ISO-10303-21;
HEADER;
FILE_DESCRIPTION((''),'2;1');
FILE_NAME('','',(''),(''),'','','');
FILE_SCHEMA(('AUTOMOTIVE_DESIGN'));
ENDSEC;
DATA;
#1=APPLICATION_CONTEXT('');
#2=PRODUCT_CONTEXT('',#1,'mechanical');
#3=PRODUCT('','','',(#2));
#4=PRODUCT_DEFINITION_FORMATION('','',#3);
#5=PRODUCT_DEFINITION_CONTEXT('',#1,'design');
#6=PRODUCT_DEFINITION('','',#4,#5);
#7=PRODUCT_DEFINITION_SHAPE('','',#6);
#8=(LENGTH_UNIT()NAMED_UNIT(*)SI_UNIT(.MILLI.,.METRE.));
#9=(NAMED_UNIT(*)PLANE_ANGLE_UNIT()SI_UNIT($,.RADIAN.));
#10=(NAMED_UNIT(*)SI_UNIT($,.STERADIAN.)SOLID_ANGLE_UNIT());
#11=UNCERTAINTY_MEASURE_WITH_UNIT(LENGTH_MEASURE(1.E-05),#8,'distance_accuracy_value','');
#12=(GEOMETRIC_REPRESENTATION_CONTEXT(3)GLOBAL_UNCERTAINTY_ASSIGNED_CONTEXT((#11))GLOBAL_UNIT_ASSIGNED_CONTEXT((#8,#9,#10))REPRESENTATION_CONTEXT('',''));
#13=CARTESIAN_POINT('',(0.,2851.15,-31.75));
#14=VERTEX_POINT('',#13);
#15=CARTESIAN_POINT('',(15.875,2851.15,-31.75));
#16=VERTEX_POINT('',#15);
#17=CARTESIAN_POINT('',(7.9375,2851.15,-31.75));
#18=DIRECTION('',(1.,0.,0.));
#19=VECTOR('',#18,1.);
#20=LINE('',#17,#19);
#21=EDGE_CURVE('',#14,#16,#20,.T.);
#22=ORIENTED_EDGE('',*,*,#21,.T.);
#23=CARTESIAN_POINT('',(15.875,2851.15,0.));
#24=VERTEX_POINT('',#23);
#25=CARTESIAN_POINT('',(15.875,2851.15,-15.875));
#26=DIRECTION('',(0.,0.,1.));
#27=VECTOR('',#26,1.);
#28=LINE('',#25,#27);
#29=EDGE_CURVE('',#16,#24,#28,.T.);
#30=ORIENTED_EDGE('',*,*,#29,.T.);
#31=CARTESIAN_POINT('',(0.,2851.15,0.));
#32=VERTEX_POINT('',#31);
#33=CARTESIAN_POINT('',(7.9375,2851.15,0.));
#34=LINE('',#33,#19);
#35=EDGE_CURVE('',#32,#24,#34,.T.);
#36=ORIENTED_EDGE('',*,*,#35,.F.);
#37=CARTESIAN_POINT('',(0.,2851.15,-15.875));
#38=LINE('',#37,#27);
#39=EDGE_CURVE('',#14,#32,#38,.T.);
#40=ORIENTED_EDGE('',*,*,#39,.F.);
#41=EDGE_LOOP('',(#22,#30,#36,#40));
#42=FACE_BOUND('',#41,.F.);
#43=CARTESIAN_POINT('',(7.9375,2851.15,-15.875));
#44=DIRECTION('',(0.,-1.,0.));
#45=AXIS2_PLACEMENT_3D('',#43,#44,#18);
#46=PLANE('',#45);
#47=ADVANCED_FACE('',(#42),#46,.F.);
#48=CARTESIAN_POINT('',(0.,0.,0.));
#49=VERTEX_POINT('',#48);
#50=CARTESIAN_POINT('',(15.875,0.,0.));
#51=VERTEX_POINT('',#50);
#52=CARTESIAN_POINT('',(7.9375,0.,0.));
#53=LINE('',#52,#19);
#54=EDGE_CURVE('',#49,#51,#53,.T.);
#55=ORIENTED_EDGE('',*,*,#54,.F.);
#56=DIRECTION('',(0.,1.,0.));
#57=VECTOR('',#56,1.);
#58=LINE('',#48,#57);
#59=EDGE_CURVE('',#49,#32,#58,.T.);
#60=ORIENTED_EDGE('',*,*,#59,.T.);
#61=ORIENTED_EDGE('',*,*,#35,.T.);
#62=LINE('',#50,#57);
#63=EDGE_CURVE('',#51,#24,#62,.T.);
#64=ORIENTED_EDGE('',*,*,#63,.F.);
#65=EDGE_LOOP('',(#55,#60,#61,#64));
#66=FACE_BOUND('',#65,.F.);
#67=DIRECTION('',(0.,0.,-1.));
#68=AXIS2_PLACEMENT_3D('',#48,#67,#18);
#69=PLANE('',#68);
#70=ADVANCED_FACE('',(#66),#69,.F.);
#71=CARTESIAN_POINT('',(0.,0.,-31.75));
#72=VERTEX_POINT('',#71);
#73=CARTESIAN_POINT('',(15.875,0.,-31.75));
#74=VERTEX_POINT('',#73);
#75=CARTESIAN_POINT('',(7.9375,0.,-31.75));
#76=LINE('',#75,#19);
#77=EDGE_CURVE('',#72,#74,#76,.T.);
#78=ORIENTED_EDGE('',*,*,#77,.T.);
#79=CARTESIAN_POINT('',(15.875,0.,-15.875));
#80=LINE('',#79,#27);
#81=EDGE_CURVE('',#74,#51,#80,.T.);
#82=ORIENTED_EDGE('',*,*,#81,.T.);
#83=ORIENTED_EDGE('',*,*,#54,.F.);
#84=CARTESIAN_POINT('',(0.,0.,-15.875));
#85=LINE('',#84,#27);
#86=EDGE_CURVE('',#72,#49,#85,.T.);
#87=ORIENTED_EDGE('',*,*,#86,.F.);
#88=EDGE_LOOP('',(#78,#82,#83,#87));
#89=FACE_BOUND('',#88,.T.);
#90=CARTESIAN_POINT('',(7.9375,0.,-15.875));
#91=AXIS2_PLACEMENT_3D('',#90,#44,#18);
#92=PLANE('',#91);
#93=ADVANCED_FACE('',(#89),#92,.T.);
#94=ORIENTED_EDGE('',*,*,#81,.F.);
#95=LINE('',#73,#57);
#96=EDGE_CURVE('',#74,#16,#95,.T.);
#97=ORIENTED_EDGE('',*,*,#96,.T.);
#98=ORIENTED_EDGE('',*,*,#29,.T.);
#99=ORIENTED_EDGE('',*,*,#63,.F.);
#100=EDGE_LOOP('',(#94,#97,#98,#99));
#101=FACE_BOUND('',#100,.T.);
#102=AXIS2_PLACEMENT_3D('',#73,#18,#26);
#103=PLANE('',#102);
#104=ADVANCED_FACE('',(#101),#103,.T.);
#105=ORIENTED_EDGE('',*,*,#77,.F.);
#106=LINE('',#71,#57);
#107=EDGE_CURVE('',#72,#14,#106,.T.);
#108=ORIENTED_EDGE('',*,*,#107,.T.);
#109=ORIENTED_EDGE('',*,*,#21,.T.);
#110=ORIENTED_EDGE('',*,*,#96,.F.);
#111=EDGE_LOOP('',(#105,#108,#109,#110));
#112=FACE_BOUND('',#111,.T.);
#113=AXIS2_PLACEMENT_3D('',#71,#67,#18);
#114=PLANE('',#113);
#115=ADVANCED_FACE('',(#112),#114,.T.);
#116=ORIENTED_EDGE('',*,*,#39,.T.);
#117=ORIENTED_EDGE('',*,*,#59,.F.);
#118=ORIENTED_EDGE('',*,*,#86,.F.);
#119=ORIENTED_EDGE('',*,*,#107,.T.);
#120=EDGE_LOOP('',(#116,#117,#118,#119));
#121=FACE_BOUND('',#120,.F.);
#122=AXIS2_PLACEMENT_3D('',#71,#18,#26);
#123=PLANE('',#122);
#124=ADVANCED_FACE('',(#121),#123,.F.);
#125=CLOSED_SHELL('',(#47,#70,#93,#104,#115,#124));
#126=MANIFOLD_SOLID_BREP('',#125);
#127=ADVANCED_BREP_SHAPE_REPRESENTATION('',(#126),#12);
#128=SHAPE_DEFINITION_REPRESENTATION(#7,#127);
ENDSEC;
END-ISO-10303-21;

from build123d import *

# Parameters (mm, degrees)
F0_W     = 15.875
F0_H     = 31.75
F1_DEPTH = 2851.15


# Not quite as in the source:
# - a feature names something its author has since deleted; it is built from what else it names


with BuildPart() as f1:
    # F0 (on Front) → F1 (new body)
    with BuildSketch(Plane.XZ):
        with Locations((7.9375, -15.875)):
            Rectangle(F0_W, F0_H)
    extrude(amount=-F1_DEPTH)


solid = f1.part
